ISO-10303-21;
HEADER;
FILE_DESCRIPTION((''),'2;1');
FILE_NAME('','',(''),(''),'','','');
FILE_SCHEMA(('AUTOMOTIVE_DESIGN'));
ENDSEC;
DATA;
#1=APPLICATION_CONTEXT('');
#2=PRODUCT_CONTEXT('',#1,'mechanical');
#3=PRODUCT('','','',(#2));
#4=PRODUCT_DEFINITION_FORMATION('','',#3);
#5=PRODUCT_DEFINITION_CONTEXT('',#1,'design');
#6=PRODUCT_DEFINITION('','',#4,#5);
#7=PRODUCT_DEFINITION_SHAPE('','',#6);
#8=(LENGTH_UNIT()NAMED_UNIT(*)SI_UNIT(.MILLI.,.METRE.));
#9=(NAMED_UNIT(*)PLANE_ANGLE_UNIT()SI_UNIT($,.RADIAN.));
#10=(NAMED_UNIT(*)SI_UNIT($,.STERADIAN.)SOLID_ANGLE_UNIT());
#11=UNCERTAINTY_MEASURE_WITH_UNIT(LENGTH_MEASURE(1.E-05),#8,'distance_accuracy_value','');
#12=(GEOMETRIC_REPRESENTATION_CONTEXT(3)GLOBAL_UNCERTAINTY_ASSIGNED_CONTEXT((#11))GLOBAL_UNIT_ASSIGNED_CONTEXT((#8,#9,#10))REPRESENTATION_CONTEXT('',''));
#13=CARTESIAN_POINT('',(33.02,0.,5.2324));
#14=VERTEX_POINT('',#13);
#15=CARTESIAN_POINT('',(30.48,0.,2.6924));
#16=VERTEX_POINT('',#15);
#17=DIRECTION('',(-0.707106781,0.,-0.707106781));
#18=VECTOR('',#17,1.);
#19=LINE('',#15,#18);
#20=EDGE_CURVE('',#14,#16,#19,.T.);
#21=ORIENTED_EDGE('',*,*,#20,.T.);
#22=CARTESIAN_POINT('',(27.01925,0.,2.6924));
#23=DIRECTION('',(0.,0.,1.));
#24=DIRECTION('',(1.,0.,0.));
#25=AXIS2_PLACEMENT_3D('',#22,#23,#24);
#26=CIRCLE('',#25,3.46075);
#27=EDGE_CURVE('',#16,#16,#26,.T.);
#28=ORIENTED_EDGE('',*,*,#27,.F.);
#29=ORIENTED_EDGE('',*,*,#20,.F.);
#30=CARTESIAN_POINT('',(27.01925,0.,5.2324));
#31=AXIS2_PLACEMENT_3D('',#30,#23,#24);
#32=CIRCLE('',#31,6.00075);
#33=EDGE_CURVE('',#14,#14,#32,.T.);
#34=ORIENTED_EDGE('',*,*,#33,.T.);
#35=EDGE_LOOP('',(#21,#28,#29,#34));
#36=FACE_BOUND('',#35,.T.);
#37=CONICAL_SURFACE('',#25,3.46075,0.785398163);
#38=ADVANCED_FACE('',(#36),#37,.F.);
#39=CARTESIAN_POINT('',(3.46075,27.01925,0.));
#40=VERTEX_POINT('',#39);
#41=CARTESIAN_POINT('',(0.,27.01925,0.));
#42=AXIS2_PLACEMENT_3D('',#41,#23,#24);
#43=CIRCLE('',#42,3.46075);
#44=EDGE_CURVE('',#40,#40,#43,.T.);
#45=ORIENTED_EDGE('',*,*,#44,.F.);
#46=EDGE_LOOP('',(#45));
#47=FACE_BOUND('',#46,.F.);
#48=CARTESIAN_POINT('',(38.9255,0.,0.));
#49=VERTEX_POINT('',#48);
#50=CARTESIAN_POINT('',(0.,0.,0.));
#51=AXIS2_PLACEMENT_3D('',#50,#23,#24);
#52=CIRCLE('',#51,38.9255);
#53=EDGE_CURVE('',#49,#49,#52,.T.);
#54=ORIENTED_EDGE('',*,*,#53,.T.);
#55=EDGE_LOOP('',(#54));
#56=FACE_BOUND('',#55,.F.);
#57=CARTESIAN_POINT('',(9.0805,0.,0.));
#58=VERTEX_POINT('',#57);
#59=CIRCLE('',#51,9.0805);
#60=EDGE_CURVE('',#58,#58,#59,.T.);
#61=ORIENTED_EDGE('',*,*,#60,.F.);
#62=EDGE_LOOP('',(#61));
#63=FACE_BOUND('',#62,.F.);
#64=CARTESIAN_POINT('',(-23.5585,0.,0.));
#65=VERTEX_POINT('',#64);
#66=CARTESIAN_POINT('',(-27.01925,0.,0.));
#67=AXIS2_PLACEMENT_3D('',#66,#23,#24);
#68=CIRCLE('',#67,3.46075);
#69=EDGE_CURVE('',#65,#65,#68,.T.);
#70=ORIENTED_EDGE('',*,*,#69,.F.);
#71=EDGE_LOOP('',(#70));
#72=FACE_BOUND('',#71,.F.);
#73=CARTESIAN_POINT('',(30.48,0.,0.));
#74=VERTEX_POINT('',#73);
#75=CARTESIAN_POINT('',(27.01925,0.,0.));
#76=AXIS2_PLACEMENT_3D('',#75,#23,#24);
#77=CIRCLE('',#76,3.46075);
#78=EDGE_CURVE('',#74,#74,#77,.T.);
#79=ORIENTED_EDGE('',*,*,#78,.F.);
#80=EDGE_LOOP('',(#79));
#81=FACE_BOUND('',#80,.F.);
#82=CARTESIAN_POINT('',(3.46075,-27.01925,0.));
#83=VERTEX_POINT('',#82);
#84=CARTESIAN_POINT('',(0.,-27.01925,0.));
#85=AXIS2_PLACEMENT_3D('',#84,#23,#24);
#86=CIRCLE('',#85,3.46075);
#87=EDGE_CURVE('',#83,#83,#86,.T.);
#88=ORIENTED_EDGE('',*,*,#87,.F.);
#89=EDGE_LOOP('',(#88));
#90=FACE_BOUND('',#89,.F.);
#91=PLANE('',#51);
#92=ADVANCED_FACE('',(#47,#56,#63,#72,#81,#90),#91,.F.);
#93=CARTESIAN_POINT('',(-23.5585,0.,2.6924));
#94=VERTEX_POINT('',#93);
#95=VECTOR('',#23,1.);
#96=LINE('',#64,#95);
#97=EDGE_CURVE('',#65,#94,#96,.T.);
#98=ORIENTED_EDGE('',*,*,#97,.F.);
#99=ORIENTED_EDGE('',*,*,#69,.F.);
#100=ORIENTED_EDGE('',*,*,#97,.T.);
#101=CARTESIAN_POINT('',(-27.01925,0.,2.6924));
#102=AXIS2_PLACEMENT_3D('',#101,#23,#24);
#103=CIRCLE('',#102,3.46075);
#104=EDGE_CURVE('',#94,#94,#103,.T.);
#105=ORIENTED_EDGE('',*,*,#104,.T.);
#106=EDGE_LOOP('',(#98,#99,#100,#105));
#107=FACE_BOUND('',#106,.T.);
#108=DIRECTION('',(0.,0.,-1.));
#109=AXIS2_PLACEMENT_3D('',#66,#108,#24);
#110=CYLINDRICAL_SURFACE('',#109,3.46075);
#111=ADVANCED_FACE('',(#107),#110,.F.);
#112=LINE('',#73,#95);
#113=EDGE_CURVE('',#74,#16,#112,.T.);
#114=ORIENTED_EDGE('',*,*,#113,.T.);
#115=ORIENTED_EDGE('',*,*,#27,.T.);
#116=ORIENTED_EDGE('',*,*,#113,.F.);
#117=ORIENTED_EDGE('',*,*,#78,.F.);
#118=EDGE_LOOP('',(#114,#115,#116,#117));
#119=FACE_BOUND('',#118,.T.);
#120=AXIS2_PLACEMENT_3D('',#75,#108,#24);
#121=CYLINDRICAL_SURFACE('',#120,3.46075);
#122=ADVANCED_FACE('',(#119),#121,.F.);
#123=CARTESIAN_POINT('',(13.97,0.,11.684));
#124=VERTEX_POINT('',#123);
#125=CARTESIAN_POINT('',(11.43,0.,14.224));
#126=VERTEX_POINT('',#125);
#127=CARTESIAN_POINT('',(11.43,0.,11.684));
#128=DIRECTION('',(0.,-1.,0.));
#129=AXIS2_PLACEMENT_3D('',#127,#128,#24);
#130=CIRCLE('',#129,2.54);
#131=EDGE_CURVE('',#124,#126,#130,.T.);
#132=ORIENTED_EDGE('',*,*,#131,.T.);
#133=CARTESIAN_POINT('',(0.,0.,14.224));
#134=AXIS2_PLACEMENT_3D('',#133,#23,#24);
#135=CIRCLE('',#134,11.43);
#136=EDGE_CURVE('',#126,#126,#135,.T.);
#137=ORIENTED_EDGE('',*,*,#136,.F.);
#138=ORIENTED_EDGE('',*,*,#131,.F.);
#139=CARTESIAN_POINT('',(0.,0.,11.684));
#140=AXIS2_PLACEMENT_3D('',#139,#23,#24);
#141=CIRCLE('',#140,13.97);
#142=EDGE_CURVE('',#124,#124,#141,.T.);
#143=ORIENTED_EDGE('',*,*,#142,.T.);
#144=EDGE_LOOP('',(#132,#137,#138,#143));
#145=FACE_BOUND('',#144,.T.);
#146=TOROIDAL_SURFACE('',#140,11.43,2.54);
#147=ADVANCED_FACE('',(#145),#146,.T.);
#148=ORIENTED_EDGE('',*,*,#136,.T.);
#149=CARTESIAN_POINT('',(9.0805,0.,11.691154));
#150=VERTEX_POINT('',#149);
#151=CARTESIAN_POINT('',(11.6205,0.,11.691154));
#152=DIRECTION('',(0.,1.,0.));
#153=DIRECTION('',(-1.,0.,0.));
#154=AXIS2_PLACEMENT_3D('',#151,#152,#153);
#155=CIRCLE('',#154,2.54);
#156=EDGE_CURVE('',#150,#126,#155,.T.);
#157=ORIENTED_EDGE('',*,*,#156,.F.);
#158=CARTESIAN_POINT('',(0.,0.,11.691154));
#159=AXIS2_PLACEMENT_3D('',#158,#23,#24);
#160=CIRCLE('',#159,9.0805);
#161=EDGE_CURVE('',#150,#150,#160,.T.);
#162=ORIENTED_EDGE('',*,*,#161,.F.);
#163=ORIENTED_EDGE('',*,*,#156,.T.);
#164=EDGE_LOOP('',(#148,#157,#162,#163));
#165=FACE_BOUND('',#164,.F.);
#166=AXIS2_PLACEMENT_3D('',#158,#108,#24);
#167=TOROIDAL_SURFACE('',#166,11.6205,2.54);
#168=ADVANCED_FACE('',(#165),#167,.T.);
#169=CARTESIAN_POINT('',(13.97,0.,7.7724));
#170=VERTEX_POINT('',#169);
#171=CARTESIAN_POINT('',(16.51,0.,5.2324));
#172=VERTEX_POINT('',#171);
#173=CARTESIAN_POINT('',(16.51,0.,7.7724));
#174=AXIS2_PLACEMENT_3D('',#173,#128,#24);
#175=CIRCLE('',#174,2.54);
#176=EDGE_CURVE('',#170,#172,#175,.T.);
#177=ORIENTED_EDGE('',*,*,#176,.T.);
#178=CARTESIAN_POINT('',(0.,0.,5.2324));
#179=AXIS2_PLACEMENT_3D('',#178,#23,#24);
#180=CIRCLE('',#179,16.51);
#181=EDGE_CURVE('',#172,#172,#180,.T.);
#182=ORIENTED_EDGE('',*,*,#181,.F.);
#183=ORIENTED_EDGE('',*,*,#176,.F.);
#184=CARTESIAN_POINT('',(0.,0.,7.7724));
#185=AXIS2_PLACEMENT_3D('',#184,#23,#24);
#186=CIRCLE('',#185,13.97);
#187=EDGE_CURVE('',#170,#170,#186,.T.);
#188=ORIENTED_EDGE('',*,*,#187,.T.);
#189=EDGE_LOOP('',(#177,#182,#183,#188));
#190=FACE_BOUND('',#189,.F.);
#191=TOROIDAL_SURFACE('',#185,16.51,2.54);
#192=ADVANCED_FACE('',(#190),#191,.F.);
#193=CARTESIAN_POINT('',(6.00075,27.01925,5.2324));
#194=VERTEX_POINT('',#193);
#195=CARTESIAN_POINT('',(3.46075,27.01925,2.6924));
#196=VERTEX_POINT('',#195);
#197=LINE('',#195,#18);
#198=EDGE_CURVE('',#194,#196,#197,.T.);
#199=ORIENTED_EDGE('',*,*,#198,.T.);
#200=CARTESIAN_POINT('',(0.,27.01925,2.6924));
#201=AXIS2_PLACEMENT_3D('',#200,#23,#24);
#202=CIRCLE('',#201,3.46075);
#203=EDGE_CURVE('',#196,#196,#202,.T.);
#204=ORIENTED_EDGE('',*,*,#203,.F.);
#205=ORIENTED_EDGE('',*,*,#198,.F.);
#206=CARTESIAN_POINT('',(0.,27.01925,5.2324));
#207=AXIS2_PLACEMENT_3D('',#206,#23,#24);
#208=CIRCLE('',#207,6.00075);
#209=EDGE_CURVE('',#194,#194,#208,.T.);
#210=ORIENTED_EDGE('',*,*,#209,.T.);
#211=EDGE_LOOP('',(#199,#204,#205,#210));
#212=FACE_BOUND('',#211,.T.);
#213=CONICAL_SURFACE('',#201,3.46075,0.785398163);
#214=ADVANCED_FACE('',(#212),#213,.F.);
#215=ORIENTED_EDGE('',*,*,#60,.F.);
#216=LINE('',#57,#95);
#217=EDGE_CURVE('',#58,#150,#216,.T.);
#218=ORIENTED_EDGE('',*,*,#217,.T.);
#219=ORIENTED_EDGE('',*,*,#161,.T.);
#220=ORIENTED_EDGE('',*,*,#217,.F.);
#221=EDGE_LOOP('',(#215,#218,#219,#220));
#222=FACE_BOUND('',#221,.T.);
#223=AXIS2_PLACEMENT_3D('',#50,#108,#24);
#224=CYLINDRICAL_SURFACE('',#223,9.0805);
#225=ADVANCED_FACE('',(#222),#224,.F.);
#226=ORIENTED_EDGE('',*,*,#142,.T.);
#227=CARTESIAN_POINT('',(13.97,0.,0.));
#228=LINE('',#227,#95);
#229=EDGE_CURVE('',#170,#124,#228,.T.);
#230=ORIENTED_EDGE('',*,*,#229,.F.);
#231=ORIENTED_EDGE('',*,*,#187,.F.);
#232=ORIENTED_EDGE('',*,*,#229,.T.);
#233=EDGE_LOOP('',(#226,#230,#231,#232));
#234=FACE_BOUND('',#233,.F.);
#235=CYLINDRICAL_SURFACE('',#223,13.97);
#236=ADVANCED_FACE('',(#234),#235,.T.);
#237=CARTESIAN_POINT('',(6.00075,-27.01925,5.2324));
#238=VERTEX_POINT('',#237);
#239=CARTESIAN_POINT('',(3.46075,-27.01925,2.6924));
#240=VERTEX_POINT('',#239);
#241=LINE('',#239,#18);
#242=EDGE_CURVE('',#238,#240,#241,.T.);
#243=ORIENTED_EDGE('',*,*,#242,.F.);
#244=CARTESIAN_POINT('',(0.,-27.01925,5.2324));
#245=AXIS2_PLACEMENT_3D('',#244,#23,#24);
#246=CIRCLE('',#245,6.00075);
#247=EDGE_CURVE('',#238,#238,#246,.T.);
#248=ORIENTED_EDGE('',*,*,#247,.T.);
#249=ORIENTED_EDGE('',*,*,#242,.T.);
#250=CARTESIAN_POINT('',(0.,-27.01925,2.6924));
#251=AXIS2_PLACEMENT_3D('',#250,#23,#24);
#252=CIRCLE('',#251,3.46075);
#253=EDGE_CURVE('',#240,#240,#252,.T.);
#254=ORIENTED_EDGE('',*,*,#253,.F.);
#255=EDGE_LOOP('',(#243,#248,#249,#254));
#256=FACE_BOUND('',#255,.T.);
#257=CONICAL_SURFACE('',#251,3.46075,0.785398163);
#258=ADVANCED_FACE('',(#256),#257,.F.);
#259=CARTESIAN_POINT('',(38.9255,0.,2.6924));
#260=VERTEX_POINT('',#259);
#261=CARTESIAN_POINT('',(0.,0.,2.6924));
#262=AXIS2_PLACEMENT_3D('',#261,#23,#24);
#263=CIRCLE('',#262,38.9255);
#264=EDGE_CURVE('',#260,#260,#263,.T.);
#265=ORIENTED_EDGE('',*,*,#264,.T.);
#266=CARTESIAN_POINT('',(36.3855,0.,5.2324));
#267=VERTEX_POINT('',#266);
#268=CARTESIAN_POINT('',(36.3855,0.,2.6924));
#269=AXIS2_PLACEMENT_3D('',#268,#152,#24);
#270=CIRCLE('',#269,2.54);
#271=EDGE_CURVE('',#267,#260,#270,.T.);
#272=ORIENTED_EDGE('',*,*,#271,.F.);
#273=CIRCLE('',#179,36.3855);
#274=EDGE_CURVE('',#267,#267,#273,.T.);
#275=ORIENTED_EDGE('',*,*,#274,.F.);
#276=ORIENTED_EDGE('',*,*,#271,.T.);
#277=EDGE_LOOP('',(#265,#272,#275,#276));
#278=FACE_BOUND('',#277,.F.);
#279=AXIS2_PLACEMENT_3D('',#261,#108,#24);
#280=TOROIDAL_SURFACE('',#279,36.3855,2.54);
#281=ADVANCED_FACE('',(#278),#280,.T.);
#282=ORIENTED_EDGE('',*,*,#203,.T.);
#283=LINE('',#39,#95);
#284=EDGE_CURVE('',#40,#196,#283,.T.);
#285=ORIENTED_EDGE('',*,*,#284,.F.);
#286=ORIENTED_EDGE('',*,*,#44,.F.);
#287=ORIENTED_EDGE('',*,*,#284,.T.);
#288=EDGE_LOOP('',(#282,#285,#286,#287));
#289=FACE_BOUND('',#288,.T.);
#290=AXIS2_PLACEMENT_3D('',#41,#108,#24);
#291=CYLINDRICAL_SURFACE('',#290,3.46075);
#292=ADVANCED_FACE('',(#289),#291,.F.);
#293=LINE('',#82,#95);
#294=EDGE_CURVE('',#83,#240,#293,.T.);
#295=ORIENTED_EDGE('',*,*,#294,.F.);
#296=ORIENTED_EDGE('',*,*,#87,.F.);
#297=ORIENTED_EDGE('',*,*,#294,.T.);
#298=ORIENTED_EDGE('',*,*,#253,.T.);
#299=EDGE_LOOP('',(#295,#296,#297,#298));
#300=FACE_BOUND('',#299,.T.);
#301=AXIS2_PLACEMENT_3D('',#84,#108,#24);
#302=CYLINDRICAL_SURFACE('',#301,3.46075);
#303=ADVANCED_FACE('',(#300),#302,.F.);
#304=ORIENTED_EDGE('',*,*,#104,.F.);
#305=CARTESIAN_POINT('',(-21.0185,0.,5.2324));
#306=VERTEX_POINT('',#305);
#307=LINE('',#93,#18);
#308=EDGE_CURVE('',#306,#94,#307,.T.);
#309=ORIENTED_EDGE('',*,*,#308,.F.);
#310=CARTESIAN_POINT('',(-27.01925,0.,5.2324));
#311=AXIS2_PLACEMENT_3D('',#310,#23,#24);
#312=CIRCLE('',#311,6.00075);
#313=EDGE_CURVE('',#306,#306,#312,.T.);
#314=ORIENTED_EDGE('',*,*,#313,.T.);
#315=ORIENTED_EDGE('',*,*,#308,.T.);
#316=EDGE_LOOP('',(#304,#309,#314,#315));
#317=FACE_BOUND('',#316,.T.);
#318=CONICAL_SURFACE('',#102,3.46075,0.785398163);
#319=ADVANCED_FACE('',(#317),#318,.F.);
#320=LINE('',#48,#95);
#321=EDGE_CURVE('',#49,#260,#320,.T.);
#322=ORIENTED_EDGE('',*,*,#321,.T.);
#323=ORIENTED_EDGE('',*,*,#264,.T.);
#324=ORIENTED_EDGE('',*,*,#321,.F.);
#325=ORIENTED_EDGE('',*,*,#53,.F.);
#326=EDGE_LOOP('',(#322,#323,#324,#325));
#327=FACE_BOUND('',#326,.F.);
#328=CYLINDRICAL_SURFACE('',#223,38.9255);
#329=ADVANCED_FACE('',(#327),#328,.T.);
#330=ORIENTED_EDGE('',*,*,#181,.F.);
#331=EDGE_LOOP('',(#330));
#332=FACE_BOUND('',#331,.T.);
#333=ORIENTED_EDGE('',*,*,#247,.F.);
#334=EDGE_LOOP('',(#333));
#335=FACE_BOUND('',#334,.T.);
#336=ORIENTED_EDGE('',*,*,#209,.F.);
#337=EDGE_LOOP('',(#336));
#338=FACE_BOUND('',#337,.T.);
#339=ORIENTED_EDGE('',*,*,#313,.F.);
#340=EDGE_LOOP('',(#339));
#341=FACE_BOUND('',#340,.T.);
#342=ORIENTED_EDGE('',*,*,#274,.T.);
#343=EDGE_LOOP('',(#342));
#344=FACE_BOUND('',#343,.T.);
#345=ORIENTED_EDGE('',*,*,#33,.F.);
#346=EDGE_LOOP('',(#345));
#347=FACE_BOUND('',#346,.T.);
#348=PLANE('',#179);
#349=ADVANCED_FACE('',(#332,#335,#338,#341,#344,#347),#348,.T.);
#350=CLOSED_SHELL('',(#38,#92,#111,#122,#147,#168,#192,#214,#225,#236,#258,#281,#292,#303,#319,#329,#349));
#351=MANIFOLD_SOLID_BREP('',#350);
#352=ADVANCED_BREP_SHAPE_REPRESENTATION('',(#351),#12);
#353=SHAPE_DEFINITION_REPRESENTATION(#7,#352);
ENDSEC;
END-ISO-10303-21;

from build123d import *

# Parameters (mm, degrees)
F0_R     = 38.9255
F0_R_2   = 3.46075
F0_R_3   = 13.97
F1_DEPTH = 5.2324
F0_R_4   = 9.0805
F2_DEPTH = 14.224
F3_R     = 2.54
F5_SIZE  = 2.54


# Not quite as in the source:
# - a fillet or chamfer that OpenCascade refuses, or shapes differently, is made with other operations: its cross-section is extruded or revolved along the edge and cut away or added


with BuildPart() as f1:
    # F0 (on Top) → F1 (new body)
    with BuildSketch(Plane.XY):
        Circle(F0_R)
        with Locations((0, -27.01925)):
            Circle(F0_R_2, mode=Mode.SUBTRACT)
        with Locations((-27.01925, 0)):
            Circle(F0_R_2, mode=Mode.SUBTRACT)
        Circle(F0_R_3, mode=Mode.SUBTRACT)
        with Locations((27.01925, 0)):
            Circle(F0_R_2, mode=Mode.SUBTRACT)
        with Locations((0, 27.01925)):
            Circle(F0_R_2, mode=Mode.SUBTRACT)
    extrude(amount=F1_DEPTH)

    # F0 (on Top) → F2 (join)
    with BuildSketch(Plane.XY):
        Circle(F0_R_3)
        Circle(F0_R_4, mode=Mode.SUBTRACT)
    extrude(amount=F2_DEPTH)

    # F3
    f3_edges = [f1.edges().sort_by_distance(p)[0] for p in [
        (-38.9255, 0, 5.2324),
        (-13.97, 0, 14.224),
        (-13.97, 0, 5.2324),
    ]]
    fillet(f3_edges, radius=F3_R)

    # F4: fillet of radius 2.54 on 1 edges, made by hand

    # F4_s1 → F4_t2 (revolve, cut)
    with BuildSketch(Plane.XZ):
        with BuildLine():
            ThreePointArc((9.0805, 11.6911538243), (9.7583144561, 13.4185405789), (11.43, 14.224))
            Line((11.43, 14.224), (9.0805, 14.224))
            Line((9.0805, 14.224), (9.0805, 11.6911538243))
        make_face()
    revolve(axis=Axis((0, 0, 14.224), (0, 0, 1)), mode=Mode.SUBTRACT)

    # F5
    f5_edges = [f1.edges().sort_by_distance(p)[0] for p in [
        (-3.46075, 27.01925, 5.2324),
        (23.5585, 0, 5.2324),
        (-3.46075, -27.01925, 5.2324),
        (-30.48, 0, 5.2324),
    ]]
    chamfer(f5_edges, length=F5_SIZE)


solid = f1.part
